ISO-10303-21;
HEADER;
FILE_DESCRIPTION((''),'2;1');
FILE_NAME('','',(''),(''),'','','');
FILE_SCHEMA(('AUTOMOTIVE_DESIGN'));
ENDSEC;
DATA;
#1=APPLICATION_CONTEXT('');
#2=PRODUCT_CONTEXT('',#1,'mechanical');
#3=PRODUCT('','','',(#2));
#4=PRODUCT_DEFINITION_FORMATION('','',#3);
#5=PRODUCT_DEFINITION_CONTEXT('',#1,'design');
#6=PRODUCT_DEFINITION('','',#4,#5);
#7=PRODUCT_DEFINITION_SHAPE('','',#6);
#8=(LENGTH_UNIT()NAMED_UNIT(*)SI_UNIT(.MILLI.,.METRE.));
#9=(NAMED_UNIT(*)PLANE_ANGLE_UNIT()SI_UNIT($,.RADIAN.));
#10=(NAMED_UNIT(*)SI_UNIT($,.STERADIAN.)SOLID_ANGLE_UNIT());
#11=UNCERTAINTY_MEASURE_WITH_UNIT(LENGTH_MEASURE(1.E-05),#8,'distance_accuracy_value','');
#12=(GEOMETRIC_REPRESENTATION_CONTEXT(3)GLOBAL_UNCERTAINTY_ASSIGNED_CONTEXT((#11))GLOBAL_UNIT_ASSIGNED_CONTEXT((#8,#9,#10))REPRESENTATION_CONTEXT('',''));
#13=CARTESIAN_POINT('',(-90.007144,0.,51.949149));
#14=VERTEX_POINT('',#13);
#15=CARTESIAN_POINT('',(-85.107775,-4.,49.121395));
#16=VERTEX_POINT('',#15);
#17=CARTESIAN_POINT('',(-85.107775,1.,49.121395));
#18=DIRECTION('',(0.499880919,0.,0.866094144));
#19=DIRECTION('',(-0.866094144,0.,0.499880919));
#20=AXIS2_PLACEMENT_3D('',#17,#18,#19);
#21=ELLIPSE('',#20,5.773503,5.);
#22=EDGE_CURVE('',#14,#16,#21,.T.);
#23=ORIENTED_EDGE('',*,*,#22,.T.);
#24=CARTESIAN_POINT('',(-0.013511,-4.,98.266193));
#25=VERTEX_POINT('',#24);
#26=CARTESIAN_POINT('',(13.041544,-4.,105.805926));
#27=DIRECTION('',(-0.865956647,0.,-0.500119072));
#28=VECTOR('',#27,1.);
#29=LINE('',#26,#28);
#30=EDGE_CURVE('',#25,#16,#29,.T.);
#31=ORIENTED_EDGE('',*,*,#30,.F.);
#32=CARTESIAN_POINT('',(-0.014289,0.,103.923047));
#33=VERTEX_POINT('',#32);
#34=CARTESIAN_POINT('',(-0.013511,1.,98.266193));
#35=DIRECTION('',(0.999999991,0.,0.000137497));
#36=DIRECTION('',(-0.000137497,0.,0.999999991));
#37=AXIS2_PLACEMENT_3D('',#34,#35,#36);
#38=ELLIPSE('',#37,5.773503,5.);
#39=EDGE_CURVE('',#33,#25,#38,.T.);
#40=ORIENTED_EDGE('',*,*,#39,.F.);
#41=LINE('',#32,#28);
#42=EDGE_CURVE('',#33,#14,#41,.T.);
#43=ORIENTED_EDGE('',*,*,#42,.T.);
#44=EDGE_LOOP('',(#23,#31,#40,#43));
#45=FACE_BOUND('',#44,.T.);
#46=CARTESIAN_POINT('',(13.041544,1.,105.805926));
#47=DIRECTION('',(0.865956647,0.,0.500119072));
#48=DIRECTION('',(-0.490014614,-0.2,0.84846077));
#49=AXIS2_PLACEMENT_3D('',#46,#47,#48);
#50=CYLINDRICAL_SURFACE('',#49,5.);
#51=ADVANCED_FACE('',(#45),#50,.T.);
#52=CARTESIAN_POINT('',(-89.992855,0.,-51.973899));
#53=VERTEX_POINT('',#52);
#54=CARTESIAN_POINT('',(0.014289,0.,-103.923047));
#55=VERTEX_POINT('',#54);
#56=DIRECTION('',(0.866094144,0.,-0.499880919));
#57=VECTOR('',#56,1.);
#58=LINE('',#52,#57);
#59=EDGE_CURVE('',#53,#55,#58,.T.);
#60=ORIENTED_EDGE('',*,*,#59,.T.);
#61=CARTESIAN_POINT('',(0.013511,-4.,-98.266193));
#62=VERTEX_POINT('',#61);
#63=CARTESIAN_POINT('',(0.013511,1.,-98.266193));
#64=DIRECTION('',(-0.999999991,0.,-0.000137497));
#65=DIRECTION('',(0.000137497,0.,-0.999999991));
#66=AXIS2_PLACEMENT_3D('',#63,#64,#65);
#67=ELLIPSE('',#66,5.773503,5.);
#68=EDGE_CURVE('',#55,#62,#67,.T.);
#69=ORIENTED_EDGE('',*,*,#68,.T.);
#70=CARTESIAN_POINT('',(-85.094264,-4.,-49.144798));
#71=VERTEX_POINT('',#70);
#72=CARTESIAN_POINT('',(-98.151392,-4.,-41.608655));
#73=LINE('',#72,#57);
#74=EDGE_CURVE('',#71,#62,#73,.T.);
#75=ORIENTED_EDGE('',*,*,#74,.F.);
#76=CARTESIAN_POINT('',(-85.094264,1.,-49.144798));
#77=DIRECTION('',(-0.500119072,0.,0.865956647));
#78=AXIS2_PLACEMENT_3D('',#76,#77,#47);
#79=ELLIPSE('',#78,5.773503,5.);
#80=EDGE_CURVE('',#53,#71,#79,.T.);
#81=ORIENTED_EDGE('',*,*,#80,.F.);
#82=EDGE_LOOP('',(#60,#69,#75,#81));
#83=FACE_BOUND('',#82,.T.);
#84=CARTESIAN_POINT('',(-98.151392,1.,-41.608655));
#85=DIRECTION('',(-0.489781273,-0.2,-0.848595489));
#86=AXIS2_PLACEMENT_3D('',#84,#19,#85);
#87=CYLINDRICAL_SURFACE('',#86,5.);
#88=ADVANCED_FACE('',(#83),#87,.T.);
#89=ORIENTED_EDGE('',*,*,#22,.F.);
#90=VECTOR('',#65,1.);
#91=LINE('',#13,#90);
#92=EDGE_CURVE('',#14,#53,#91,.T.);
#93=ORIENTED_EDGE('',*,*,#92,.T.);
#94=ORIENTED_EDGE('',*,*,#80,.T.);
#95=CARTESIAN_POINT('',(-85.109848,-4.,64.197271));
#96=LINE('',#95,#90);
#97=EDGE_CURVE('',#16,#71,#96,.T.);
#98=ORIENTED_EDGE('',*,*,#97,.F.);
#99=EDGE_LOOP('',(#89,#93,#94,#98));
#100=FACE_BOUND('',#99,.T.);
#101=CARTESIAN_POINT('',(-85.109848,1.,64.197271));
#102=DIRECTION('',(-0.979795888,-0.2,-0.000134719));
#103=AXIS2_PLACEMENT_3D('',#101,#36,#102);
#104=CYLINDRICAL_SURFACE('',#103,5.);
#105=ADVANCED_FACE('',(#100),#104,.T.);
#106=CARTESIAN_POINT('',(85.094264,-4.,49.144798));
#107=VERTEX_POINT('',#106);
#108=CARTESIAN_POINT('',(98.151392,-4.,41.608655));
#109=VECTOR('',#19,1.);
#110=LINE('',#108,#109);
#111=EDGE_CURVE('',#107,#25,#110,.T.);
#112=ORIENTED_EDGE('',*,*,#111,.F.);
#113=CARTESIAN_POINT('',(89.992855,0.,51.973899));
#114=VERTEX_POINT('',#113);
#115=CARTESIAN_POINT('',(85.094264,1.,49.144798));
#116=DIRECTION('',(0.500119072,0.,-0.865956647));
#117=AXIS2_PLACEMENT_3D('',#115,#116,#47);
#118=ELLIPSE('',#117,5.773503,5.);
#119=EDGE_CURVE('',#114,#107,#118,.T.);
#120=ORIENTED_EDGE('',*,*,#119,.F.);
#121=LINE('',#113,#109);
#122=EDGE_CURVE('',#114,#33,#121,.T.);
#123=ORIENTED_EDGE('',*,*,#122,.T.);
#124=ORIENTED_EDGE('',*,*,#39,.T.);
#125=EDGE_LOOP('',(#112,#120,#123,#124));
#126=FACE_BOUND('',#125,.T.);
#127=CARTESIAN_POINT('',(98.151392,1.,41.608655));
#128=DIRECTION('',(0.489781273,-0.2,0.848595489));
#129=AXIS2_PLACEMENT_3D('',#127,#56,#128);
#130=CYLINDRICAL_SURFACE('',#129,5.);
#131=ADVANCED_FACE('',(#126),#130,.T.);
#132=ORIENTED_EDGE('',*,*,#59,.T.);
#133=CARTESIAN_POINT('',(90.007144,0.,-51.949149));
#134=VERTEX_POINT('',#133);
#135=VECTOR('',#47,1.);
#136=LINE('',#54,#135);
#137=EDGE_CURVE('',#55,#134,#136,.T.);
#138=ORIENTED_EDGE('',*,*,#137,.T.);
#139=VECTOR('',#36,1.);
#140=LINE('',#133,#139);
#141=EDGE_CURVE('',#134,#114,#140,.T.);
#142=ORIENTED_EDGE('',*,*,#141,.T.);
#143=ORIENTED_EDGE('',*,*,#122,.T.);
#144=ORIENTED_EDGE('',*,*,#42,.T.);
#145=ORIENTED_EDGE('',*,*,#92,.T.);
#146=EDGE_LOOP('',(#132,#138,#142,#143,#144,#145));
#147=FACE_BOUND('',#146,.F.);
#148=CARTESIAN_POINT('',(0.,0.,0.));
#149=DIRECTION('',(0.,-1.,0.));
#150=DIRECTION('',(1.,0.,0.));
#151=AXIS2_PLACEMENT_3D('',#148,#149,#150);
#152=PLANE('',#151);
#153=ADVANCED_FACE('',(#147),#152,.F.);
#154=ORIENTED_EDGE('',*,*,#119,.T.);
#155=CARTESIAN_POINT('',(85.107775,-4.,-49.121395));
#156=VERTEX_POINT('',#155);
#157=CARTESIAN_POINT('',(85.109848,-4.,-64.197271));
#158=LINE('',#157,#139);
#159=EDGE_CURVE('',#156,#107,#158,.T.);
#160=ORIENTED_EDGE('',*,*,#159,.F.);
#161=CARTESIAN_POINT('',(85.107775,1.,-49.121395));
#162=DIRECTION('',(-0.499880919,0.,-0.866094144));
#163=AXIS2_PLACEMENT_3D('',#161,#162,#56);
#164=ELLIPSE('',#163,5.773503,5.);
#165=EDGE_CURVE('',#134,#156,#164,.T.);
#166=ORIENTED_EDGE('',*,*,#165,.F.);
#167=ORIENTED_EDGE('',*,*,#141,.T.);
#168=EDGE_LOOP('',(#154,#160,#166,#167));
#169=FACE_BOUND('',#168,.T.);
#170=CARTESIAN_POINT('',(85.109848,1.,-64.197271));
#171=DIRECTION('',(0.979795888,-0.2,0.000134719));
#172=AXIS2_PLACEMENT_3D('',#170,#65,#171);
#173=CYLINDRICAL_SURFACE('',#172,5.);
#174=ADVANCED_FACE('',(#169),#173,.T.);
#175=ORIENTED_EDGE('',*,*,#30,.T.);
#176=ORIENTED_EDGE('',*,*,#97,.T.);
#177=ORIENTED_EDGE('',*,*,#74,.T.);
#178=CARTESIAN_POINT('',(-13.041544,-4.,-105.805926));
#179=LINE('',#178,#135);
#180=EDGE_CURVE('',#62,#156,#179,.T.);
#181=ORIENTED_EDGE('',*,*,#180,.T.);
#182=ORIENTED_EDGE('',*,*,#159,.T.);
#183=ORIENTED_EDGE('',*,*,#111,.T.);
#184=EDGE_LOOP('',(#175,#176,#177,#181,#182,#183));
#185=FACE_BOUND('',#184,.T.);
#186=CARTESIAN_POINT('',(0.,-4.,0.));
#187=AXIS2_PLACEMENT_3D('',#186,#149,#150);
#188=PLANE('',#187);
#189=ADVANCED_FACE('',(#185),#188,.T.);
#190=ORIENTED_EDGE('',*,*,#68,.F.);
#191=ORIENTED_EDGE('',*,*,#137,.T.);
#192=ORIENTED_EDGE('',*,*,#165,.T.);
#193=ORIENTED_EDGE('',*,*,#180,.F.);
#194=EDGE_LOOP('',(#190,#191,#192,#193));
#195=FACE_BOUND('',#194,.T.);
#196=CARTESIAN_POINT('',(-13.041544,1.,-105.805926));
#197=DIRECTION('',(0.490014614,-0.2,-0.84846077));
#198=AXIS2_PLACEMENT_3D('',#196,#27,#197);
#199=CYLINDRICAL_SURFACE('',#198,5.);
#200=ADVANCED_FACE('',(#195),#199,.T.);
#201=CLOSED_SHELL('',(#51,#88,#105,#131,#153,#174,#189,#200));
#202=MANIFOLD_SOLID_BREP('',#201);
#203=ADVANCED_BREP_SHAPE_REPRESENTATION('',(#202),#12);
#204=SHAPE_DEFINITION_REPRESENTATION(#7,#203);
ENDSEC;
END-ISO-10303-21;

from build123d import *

# Parameters (mm, degrees)
F1_DEPTH     = 4
F2_T1_DEPTH  = 128.417945882
F2_T3_DEPTH  = 128.417945882
F2_T5_DEPTH  = 128.417945882
F2_T7_DEPTH  = 128.417945882
F2_T9_DEPTH  = 128.417945882
F2_T11_DEPTH = 128.417945882


# Not quite as in the source:
# - a fillet or chamfer that OpenCascade refuses, or shapes differently, is made with other operations: its cross-section is extruded or revolved along the edge and cut away or added


with BuildPart() as f1:
    # F0 (on Front) → F1 (new body)
    with BuildSketch(Plane.XZ):
        Polygon((89.9928545723, 51.9738985062), (-0.0142891539, 103.9230474718), (-90.0071437262, 51.9491489656), (-89.9928545723, -51.9738985062), (0.0142891539, -103.9230474718), (90.0071437262, -51.9491489656), align=None)
    extrude(amount=F1_DEPTH)

    # F2: fillet of radius 5 on 6 edges, made by hand

    # F2_s2 → F2_t1 (cut)
    with BuildSketch(Plane(origin=(-0.0088285699, 0, 64.208972334), x_dir=(0, 1, 0), z_dir=(0.0001374974, 0, -0.9999999905))):
        with BuildLine():
            ThreePointArc((0, -90), (-2.8729833462, -88.2632981746), (-4, -85.1010205144))
            Line((-4, -85.1010205144), (-4, -90))
            Line((-4, -90), (0, -90))
        make_face()
    extrude(amount=F2_T1_DEPTH, mode=Mode.SUBTRACT)

    # F2_s4 → F2_t3 (cut)
    with BuildSketch(Plane(origin=(55.6021869072, 0, 32.1121319328), x_dir=(0, 1, 0), z_dir=(-0.8659566469, 0, -0.5001190716))):
        with BuildLine():
            ThreePointArc((0, -90), (-2.8729833462, -88.2632981746), (-4, -85.1010205144))
            Line((-4, -85.1010205144), (-4, -90))
            Line((-4, -90), (0, -90))
        make_face()
    extrude(amount=F2_T3_DEPTH, mode=Mode.SUBTRACT)

    # F2_s6 → F2_t5 (cut)
    with BuildSketch(Plane(origin=(55.6110154771, 0, -32.0968404012), x_dir=(0, 1, 0), z_dir=(-0.8660941443, 0, 0.499880919))):
        with BuildLine():
            ThreePointArc((0, -90), (-2.8729833462, -88.2632981746), (-4, -85.1010205144))
            Line((-4, -85.1010205144), (-4, -90))
            Line((-4, -90), (0, -90))
        make_face()
    extrude(amount=F2_T5_DEPTH, mode=Mode.SUBTRACT)

    # F2_s8 → F2_t7 (cut)
    with BuildSketch(Plane(origin=(0.0088285699, 0, -64.208972334), x_dir=(0, 1, 0), z_dir=(-0.0001374974, 0, 0.9999999905))):
        with BuildLine():
            ThreePointArc((0, -90), (-2.8729833462, -88.2632981746), (-4, -85.1010205144))
            Line((-4, -85.1010205144), (-4, -90))
            Line((-4, -90), (0, -90))
        make_face()
    extrude(amount=F2_T7_DEPTH, mode=Mode.SUBTRACT)

    # F2_s10 → F2_t9 (cut)
    with BuildSketch(Plane(origin=(-55.6021869072, 0, -32.1121319328), x_dir=(0, 1, 0), z_dir=(0.8659566469, 0, 0.5001190716))):
        with BuildLine():
            ThreePointArc((0, -90), (-2.8729833462, -88.2632981746), (-4, -85.1010205144))
            Line((-4, -85.1010205144), (-4, -90))
            Line((-4, -90), (0, -90))
        make_face()
    extrude(amount=F2_T9_DEPTH, mode=Mode.SUBTRACT)

    # F2_s12 → F2_t11 (cut)
    with BuildSketch(Plane(origin=(-55.6110154771, 0, 32.0968404012), x_dir=(0, 1, 0), z_dir=(0.8660941443, 0, -0.499880919))):
        with BuildLine():
            ThreePointArc((0, -90), (-2.8729833462, -88.2632981746), (-4, -85.1010205144))
            Line((-4, -85.1010205144), (-4, -90))
            Line((-4, -90), (0, -90))
        make_face()
    extrude(amount=F2_T11_DEPTH, mode=Mode.SUBTRACT)


solid = f1.part
